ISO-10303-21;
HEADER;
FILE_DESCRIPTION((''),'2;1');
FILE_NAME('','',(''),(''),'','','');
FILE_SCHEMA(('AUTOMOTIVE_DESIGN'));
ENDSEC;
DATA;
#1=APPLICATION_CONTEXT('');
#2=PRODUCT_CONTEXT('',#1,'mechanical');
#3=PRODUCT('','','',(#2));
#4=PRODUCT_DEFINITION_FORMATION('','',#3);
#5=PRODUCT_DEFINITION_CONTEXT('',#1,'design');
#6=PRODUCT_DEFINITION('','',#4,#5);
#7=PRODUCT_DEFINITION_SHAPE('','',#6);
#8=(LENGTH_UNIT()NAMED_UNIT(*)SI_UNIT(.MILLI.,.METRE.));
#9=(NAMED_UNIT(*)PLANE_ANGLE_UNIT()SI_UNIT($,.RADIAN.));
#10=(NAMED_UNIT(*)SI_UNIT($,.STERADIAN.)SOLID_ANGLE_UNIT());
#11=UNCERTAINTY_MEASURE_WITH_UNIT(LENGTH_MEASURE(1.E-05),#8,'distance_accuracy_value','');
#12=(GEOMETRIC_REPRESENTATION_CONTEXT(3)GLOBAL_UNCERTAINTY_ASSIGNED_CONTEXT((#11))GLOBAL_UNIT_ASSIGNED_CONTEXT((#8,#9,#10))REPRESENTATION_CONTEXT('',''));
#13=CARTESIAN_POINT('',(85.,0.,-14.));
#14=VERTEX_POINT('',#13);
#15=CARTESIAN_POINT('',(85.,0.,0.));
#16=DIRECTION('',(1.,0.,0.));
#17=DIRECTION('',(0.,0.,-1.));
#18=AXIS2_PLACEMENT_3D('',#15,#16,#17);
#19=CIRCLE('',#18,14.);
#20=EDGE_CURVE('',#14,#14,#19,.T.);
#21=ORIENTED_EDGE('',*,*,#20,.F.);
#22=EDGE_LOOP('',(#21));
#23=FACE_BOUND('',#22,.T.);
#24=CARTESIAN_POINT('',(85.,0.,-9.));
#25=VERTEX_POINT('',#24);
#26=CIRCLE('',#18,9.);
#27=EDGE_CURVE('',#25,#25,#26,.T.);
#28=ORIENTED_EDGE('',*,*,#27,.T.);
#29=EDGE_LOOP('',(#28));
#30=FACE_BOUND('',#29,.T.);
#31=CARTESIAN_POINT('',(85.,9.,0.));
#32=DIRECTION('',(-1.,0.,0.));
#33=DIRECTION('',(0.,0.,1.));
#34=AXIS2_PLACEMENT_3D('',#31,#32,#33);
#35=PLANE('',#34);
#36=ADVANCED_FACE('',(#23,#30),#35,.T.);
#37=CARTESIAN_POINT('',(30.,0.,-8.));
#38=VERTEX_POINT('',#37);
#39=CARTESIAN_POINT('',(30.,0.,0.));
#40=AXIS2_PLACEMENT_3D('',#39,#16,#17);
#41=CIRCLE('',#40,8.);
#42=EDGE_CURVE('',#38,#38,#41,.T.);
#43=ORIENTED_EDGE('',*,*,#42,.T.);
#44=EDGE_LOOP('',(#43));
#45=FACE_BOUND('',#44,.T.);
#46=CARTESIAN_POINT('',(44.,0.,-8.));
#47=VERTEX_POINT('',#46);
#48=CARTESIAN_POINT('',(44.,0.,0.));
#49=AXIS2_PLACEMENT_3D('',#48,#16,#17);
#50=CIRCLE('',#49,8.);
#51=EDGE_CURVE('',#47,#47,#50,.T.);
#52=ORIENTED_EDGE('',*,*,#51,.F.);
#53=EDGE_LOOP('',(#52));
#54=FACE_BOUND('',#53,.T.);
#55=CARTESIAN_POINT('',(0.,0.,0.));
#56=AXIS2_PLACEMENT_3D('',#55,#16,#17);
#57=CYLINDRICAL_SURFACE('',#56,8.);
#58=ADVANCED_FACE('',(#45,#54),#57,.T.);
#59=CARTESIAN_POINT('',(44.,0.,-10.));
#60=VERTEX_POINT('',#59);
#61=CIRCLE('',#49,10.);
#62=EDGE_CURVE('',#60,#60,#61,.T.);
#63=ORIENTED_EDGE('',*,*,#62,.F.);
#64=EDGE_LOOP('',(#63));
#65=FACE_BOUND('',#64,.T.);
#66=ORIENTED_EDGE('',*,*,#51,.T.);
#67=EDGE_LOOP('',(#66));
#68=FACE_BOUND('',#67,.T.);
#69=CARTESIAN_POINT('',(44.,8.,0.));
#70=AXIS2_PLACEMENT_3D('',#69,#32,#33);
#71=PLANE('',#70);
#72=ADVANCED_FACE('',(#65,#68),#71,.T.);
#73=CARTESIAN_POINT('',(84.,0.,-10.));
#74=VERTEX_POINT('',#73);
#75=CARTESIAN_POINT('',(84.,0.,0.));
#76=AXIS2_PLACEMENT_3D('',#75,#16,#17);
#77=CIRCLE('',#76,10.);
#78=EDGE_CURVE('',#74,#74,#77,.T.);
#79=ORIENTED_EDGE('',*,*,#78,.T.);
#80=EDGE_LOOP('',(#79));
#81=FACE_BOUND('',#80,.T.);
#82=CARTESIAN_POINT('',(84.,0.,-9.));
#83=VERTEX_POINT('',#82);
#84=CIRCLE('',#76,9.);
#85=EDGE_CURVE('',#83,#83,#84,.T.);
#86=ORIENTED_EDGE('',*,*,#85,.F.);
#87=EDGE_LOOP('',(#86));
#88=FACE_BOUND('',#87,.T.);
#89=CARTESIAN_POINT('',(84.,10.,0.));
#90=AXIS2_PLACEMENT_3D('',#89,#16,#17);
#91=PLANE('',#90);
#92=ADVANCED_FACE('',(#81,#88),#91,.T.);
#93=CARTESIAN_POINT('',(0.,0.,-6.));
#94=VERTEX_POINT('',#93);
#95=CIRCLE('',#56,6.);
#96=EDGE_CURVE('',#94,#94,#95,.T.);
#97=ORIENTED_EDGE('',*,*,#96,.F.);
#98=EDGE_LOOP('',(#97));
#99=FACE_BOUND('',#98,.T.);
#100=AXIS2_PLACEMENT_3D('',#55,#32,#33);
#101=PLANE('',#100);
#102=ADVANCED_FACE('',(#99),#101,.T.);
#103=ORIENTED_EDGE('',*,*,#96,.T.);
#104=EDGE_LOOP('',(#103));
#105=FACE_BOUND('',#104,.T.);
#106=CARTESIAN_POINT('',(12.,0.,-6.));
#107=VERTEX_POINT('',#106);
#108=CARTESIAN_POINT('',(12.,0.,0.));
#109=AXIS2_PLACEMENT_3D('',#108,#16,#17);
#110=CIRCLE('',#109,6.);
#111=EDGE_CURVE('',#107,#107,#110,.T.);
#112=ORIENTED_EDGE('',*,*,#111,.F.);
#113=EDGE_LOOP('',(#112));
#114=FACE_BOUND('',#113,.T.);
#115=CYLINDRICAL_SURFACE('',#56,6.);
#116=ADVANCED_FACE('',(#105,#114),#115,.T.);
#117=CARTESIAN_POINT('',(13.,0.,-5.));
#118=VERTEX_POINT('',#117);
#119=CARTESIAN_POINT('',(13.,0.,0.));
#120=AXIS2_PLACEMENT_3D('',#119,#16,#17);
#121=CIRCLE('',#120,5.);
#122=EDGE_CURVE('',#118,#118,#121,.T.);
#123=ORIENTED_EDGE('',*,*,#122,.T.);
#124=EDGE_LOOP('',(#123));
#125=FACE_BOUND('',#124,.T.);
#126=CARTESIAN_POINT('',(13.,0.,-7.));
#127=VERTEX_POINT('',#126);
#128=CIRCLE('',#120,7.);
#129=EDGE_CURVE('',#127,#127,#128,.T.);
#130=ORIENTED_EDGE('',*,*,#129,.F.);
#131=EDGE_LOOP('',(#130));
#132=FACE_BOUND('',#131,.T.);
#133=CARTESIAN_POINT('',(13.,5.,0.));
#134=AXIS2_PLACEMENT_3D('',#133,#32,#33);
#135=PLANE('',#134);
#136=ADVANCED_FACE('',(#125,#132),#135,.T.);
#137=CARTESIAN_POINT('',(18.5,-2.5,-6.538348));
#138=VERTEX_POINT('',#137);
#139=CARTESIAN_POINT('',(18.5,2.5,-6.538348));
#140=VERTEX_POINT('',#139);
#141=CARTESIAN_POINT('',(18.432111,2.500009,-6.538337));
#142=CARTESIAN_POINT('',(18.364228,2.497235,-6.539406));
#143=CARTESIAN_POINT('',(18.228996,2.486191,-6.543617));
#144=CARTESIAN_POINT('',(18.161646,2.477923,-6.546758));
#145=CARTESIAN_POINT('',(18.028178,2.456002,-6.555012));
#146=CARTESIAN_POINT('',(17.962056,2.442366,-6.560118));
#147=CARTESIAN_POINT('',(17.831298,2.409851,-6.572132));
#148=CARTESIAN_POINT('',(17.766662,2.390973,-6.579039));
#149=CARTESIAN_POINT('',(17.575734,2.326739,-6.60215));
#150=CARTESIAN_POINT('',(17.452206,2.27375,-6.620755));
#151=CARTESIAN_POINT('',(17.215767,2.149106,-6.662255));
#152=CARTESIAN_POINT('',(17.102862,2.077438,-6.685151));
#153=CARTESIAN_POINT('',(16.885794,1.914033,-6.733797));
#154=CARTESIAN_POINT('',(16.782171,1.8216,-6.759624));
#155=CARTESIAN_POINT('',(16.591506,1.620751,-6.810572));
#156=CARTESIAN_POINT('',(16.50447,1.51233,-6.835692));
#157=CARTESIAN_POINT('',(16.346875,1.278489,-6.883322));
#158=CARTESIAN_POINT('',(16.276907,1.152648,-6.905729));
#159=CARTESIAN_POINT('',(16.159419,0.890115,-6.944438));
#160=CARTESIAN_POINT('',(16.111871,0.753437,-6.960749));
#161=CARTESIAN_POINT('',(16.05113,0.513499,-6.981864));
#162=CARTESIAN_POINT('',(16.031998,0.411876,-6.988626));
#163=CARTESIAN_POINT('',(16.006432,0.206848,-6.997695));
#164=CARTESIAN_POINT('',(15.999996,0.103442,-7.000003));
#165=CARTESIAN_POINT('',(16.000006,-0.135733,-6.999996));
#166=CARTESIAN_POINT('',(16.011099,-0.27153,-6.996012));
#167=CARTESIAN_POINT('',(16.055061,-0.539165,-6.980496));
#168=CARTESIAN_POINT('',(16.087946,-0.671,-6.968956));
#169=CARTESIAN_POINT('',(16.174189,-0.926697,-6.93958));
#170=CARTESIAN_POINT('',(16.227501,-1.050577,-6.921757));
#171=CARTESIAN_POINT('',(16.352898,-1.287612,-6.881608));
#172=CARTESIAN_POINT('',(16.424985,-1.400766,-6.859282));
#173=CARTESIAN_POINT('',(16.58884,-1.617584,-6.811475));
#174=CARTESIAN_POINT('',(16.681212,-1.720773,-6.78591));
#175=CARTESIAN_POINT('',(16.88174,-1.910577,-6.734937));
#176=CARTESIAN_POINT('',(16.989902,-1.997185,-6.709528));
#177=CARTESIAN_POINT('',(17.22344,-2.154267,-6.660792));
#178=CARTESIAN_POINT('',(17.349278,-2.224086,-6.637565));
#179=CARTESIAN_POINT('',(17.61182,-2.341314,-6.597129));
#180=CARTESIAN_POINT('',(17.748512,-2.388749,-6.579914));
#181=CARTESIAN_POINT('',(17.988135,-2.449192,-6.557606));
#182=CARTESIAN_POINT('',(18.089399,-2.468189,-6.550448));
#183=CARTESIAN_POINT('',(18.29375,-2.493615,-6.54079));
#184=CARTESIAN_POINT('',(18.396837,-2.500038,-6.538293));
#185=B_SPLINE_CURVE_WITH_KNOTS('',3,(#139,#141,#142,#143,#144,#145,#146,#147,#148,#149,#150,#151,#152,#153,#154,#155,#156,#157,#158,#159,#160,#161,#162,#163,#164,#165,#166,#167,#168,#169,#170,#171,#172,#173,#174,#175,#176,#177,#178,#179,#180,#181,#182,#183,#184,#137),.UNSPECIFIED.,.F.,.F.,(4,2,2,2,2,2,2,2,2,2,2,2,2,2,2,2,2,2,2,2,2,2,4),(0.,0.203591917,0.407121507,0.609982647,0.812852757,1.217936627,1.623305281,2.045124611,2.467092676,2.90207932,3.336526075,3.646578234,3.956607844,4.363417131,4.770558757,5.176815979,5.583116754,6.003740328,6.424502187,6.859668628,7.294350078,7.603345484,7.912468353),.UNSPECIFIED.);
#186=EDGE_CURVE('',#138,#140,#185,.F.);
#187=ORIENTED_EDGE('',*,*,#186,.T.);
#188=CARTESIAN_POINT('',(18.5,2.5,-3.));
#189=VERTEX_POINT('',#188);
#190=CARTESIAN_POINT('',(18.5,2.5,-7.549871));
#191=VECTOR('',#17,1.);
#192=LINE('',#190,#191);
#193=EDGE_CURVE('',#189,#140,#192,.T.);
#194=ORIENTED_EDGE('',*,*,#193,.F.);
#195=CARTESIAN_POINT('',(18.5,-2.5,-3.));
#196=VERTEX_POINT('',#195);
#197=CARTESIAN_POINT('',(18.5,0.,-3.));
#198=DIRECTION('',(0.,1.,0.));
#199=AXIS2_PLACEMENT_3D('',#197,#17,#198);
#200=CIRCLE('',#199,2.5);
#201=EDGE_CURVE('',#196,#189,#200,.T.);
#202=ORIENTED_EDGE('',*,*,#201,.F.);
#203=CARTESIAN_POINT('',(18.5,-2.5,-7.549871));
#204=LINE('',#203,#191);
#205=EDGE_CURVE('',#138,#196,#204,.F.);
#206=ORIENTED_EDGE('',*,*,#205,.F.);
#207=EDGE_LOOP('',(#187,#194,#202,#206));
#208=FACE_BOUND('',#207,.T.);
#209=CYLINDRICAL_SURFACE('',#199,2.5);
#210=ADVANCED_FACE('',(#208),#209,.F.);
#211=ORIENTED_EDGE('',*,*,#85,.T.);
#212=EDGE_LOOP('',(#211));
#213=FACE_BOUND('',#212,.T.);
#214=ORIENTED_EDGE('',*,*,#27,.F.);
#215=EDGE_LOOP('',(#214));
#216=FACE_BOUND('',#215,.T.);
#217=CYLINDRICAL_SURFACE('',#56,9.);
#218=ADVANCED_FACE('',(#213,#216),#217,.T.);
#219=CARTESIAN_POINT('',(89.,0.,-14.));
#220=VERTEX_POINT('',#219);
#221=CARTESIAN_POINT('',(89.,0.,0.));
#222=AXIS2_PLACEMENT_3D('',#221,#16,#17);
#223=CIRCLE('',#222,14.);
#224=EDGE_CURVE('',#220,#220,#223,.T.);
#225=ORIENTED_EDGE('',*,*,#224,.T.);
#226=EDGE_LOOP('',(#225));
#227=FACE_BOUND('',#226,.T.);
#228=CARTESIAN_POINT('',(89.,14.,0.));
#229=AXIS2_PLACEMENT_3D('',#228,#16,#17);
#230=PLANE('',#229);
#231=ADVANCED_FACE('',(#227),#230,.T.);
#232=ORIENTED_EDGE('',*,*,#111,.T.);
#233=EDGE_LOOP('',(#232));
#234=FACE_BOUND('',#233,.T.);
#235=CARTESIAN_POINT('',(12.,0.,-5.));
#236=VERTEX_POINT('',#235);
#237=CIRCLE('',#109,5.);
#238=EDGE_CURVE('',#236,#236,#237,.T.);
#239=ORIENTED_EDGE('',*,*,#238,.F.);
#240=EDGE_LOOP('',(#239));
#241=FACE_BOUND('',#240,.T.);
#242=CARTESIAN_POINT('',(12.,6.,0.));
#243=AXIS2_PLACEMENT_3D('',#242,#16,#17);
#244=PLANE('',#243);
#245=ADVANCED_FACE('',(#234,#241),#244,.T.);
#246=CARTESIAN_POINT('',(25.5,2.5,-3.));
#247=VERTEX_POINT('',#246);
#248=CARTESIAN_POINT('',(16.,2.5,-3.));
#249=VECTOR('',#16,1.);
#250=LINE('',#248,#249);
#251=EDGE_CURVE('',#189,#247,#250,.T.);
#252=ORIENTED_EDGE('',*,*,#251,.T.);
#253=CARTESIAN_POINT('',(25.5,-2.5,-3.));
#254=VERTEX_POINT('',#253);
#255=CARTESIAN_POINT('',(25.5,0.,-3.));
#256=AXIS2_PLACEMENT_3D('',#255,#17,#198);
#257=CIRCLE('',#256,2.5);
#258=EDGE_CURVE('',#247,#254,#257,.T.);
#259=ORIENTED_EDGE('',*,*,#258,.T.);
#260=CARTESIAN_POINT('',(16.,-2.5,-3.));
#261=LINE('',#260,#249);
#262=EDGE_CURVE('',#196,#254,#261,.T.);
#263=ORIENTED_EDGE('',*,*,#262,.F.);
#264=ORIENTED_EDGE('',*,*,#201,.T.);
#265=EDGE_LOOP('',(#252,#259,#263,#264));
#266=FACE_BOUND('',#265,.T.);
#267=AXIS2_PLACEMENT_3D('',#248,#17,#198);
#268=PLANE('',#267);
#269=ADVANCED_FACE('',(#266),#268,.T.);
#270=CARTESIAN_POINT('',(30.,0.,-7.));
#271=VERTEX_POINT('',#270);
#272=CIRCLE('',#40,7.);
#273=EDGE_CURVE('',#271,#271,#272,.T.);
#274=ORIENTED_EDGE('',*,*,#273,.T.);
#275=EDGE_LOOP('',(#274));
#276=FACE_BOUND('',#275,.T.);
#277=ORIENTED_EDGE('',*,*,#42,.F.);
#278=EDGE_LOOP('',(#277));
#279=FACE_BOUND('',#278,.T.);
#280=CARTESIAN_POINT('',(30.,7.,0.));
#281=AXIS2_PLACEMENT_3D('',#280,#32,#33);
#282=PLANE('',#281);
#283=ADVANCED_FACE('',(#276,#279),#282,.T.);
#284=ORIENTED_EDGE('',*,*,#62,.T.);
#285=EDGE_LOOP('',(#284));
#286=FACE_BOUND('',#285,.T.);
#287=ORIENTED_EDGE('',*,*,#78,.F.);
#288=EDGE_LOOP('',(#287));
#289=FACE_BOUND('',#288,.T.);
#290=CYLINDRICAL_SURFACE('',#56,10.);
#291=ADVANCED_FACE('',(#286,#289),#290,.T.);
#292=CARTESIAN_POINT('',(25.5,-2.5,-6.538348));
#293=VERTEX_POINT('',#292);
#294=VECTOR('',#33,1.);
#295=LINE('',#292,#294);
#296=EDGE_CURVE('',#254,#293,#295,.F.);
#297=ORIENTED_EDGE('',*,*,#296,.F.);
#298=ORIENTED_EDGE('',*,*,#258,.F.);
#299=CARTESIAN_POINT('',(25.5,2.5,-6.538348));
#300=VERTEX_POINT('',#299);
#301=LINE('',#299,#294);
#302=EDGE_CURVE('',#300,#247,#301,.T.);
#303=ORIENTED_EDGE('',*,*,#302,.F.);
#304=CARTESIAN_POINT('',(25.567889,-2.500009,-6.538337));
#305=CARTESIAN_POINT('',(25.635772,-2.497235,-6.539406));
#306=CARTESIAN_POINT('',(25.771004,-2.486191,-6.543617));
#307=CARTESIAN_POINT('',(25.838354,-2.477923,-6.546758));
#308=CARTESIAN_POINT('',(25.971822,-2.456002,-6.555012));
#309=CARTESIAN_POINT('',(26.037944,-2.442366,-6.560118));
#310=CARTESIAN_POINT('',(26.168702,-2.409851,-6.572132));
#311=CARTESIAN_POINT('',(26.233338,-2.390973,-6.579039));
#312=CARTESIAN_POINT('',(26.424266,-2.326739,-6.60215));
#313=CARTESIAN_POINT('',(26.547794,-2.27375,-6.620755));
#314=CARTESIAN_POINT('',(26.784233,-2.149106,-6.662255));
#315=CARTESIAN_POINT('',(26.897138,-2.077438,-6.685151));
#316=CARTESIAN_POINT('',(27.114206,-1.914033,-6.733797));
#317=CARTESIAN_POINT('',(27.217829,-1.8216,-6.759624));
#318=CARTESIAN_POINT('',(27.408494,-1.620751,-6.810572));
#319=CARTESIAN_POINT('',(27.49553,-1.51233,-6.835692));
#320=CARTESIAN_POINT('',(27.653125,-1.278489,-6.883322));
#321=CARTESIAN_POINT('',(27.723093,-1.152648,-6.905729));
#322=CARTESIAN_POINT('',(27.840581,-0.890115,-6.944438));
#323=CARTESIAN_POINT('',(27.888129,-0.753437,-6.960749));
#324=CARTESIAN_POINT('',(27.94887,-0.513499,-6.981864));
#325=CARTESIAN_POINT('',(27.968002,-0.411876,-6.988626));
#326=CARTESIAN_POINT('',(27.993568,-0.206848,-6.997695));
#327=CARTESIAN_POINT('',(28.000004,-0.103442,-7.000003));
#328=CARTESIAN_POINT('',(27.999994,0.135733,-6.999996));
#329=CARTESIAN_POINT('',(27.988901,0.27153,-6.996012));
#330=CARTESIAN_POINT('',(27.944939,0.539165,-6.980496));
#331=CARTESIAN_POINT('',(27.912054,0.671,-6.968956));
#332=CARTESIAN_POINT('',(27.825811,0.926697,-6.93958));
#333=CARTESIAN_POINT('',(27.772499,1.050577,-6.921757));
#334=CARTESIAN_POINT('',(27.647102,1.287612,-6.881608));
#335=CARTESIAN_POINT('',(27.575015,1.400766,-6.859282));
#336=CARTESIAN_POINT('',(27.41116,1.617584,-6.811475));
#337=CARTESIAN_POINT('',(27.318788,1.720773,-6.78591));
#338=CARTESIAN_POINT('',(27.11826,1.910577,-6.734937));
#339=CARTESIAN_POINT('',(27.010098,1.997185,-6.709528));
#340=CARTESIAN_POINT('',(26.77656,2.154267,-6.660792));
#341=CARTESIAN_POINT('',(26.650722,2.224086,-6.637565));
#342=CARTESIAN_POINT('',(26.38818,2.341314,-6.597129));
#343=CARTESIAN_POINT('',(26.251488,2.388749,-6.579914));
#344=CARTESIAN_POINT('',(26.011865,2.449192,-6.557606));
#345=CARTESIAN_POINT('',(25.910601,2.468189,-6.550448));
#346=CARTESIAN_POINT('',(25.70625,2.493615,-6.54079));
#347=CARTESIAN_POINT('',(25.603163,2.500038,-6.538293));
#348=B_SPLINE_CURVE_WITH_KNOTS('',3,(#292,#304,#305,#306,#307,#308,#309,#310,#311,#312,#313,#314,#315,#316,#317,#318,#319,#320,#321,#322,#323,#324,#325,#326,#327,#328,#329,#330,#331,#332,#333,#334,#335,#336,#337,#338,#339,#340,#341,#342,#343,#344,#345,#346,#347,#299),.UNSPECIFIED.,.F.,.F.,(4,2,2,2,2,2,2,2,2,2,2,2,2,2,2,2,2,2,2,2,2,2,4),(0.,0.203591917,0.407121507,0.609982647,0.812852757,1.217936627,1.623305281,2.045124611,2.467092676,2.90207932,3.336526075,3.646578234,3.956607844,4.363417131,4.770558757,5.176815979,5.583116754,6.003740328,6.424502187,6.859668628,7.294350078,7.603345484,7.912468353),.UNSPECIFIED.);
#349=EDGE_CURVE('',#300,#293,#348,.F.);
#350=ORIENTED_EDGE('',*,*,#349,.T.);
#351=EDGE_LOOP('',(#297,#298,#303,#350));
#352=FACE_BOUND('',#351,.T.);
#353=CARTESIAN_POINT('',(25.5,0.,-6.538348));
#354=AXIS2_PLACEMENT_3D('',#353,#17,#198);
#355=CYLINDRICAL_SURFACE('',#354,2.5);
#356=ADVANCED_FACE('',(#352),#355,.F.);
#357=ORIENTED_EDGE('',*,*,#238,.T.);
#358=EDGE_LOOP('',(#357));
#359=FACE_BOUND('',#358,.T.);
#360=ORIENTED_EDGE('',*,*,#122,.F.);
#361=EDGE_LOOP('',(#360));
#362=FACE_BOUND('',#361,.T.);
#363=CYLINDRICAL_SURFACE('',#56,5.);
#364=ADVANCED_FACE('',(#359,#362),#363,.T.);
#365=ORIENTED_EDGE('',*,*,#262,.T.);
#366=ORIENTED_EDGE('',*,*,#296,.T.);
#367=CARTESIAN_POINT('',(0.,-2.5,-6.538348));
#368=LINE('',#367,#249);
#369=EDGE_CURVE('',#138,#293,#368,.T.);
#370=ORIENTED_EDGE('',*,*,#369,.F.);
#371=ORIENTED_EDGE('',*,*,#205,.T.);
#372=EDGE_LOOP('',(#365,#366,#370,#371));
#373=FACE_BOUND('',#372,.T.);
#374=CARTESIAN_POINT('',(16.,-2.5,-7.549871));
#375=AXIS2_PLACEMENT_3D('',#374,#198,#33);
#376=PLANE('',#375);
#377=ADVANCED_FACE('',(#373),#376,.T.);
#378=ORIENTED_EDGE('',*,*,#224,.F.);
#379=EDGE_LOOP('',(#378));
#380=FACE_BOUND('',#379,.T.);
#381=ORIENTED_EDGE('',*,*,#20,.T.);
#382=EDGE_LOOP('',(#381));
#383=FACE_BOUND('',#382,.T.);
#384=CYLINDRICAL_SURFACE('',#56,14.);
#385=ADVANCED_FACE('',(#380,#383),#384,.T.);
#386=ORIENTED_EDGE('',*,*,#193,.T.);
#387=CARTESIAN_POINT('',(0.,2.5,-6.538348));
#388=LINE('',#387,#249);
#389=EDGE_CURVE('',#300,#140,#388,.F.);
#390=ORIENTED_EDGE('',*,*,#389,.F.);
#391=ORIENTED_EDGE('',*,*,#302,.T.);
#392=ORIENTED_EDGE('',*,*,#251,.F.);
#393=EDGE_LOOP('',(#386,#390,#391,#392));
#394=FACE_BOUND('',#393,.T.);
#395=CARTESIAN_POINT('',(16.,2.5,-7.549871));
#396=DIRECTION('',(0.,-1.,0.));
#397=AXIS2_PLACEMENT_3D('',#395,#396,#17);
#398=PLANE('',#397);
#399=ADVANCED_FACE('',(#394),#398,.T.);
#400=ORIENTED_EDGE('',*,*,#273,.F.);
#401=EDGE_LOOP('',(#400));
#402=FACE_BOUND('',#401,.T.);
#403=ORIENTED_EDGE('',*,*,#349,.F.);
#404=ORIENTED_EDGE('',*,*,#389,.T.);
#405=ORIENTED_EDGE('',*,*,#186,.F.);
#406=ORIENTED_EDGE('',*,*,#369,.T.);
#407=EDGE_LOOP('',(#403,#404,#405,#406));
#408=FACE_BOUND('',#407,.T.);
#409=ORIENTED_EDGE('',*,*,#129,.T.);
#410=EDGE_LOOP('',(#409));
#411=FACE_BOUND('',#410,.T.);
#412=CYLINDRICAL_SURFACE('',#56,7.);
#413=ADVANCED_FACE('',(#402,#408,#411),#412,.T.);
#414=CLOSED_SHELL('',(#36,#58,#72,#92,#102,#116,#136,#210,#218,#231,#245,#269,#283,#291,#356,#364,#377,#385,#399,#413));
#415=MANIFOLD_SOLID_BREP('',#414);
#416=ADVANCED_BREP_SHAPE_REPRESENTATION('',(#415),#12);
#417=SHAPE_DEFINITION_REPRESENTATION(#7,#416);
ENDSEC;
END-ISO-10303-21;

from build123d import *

# Parameters (mm, degrees)
SKETCH_2_W          = 4.549870692
SKETCH_2_H          = 5
CUT_EXTRUDE_1_DEPTH = 12
FILLET_1_R          = 2.5
FILLET_2_R          = 2.5


with BuildPart() as part:
    # 草图1 → 旋转1 (revolve)
    with BuildSketch(Plane.XY, mode=Mode.PRIVATE) as revolve_1_sk:
        Polygon((0, 0), (0, 6), (12, 6), (12, 5), (13, 5), (13, 7), (30, 7), (30, 8), (44, 8), (44, 10), (84, 10), (84, 9), (85, 9), (85, 14), (89, 14), (89, 0), align=None)
    revolve(revolve_1_sk.sketch.rotate(Axis((0, 0, 0), (-1, 0, 0)), 90), axis=Axis((0, 0, 0), (-1, 0, 0)))

    # 草图2 → 切除-拉伸1 (cut)
    with BuildSketch(Plane.ZY.offset(-28)):
        with Locations((-5.274935346, 0)):
            Rectangle(SKETCH_2_W, SKETCH_2_H)
    extrude(amount=CUT_EXTRUDE_1_DEPTH, mode=Mode.SUBTRACT)

    # 圆角1
    fillet_1_edges = [part.edges().sort_by_distance(p)[0] for p in [
        (16, -2.5, -4.769174208),
        (16, 2.5, -4.769174208),
    ]]
    fillet(fillet_1_edges, radius=FILLET_1_R - 0.0001)  # a hair under: the kernel refuses the full size

    # 圆角2
    fillet_2_edges = [part.edges().sort_by_distance(p)[0] for p in [
        (28, 2.5, -4.769174208),
        (28, -2.5, -4.769174208),
    ]]
    fillet(fillet_2_edges, radius=FILLET_2_R - 0.0001)  # a hair under: the kernel refuses the full size


solid = part.part
